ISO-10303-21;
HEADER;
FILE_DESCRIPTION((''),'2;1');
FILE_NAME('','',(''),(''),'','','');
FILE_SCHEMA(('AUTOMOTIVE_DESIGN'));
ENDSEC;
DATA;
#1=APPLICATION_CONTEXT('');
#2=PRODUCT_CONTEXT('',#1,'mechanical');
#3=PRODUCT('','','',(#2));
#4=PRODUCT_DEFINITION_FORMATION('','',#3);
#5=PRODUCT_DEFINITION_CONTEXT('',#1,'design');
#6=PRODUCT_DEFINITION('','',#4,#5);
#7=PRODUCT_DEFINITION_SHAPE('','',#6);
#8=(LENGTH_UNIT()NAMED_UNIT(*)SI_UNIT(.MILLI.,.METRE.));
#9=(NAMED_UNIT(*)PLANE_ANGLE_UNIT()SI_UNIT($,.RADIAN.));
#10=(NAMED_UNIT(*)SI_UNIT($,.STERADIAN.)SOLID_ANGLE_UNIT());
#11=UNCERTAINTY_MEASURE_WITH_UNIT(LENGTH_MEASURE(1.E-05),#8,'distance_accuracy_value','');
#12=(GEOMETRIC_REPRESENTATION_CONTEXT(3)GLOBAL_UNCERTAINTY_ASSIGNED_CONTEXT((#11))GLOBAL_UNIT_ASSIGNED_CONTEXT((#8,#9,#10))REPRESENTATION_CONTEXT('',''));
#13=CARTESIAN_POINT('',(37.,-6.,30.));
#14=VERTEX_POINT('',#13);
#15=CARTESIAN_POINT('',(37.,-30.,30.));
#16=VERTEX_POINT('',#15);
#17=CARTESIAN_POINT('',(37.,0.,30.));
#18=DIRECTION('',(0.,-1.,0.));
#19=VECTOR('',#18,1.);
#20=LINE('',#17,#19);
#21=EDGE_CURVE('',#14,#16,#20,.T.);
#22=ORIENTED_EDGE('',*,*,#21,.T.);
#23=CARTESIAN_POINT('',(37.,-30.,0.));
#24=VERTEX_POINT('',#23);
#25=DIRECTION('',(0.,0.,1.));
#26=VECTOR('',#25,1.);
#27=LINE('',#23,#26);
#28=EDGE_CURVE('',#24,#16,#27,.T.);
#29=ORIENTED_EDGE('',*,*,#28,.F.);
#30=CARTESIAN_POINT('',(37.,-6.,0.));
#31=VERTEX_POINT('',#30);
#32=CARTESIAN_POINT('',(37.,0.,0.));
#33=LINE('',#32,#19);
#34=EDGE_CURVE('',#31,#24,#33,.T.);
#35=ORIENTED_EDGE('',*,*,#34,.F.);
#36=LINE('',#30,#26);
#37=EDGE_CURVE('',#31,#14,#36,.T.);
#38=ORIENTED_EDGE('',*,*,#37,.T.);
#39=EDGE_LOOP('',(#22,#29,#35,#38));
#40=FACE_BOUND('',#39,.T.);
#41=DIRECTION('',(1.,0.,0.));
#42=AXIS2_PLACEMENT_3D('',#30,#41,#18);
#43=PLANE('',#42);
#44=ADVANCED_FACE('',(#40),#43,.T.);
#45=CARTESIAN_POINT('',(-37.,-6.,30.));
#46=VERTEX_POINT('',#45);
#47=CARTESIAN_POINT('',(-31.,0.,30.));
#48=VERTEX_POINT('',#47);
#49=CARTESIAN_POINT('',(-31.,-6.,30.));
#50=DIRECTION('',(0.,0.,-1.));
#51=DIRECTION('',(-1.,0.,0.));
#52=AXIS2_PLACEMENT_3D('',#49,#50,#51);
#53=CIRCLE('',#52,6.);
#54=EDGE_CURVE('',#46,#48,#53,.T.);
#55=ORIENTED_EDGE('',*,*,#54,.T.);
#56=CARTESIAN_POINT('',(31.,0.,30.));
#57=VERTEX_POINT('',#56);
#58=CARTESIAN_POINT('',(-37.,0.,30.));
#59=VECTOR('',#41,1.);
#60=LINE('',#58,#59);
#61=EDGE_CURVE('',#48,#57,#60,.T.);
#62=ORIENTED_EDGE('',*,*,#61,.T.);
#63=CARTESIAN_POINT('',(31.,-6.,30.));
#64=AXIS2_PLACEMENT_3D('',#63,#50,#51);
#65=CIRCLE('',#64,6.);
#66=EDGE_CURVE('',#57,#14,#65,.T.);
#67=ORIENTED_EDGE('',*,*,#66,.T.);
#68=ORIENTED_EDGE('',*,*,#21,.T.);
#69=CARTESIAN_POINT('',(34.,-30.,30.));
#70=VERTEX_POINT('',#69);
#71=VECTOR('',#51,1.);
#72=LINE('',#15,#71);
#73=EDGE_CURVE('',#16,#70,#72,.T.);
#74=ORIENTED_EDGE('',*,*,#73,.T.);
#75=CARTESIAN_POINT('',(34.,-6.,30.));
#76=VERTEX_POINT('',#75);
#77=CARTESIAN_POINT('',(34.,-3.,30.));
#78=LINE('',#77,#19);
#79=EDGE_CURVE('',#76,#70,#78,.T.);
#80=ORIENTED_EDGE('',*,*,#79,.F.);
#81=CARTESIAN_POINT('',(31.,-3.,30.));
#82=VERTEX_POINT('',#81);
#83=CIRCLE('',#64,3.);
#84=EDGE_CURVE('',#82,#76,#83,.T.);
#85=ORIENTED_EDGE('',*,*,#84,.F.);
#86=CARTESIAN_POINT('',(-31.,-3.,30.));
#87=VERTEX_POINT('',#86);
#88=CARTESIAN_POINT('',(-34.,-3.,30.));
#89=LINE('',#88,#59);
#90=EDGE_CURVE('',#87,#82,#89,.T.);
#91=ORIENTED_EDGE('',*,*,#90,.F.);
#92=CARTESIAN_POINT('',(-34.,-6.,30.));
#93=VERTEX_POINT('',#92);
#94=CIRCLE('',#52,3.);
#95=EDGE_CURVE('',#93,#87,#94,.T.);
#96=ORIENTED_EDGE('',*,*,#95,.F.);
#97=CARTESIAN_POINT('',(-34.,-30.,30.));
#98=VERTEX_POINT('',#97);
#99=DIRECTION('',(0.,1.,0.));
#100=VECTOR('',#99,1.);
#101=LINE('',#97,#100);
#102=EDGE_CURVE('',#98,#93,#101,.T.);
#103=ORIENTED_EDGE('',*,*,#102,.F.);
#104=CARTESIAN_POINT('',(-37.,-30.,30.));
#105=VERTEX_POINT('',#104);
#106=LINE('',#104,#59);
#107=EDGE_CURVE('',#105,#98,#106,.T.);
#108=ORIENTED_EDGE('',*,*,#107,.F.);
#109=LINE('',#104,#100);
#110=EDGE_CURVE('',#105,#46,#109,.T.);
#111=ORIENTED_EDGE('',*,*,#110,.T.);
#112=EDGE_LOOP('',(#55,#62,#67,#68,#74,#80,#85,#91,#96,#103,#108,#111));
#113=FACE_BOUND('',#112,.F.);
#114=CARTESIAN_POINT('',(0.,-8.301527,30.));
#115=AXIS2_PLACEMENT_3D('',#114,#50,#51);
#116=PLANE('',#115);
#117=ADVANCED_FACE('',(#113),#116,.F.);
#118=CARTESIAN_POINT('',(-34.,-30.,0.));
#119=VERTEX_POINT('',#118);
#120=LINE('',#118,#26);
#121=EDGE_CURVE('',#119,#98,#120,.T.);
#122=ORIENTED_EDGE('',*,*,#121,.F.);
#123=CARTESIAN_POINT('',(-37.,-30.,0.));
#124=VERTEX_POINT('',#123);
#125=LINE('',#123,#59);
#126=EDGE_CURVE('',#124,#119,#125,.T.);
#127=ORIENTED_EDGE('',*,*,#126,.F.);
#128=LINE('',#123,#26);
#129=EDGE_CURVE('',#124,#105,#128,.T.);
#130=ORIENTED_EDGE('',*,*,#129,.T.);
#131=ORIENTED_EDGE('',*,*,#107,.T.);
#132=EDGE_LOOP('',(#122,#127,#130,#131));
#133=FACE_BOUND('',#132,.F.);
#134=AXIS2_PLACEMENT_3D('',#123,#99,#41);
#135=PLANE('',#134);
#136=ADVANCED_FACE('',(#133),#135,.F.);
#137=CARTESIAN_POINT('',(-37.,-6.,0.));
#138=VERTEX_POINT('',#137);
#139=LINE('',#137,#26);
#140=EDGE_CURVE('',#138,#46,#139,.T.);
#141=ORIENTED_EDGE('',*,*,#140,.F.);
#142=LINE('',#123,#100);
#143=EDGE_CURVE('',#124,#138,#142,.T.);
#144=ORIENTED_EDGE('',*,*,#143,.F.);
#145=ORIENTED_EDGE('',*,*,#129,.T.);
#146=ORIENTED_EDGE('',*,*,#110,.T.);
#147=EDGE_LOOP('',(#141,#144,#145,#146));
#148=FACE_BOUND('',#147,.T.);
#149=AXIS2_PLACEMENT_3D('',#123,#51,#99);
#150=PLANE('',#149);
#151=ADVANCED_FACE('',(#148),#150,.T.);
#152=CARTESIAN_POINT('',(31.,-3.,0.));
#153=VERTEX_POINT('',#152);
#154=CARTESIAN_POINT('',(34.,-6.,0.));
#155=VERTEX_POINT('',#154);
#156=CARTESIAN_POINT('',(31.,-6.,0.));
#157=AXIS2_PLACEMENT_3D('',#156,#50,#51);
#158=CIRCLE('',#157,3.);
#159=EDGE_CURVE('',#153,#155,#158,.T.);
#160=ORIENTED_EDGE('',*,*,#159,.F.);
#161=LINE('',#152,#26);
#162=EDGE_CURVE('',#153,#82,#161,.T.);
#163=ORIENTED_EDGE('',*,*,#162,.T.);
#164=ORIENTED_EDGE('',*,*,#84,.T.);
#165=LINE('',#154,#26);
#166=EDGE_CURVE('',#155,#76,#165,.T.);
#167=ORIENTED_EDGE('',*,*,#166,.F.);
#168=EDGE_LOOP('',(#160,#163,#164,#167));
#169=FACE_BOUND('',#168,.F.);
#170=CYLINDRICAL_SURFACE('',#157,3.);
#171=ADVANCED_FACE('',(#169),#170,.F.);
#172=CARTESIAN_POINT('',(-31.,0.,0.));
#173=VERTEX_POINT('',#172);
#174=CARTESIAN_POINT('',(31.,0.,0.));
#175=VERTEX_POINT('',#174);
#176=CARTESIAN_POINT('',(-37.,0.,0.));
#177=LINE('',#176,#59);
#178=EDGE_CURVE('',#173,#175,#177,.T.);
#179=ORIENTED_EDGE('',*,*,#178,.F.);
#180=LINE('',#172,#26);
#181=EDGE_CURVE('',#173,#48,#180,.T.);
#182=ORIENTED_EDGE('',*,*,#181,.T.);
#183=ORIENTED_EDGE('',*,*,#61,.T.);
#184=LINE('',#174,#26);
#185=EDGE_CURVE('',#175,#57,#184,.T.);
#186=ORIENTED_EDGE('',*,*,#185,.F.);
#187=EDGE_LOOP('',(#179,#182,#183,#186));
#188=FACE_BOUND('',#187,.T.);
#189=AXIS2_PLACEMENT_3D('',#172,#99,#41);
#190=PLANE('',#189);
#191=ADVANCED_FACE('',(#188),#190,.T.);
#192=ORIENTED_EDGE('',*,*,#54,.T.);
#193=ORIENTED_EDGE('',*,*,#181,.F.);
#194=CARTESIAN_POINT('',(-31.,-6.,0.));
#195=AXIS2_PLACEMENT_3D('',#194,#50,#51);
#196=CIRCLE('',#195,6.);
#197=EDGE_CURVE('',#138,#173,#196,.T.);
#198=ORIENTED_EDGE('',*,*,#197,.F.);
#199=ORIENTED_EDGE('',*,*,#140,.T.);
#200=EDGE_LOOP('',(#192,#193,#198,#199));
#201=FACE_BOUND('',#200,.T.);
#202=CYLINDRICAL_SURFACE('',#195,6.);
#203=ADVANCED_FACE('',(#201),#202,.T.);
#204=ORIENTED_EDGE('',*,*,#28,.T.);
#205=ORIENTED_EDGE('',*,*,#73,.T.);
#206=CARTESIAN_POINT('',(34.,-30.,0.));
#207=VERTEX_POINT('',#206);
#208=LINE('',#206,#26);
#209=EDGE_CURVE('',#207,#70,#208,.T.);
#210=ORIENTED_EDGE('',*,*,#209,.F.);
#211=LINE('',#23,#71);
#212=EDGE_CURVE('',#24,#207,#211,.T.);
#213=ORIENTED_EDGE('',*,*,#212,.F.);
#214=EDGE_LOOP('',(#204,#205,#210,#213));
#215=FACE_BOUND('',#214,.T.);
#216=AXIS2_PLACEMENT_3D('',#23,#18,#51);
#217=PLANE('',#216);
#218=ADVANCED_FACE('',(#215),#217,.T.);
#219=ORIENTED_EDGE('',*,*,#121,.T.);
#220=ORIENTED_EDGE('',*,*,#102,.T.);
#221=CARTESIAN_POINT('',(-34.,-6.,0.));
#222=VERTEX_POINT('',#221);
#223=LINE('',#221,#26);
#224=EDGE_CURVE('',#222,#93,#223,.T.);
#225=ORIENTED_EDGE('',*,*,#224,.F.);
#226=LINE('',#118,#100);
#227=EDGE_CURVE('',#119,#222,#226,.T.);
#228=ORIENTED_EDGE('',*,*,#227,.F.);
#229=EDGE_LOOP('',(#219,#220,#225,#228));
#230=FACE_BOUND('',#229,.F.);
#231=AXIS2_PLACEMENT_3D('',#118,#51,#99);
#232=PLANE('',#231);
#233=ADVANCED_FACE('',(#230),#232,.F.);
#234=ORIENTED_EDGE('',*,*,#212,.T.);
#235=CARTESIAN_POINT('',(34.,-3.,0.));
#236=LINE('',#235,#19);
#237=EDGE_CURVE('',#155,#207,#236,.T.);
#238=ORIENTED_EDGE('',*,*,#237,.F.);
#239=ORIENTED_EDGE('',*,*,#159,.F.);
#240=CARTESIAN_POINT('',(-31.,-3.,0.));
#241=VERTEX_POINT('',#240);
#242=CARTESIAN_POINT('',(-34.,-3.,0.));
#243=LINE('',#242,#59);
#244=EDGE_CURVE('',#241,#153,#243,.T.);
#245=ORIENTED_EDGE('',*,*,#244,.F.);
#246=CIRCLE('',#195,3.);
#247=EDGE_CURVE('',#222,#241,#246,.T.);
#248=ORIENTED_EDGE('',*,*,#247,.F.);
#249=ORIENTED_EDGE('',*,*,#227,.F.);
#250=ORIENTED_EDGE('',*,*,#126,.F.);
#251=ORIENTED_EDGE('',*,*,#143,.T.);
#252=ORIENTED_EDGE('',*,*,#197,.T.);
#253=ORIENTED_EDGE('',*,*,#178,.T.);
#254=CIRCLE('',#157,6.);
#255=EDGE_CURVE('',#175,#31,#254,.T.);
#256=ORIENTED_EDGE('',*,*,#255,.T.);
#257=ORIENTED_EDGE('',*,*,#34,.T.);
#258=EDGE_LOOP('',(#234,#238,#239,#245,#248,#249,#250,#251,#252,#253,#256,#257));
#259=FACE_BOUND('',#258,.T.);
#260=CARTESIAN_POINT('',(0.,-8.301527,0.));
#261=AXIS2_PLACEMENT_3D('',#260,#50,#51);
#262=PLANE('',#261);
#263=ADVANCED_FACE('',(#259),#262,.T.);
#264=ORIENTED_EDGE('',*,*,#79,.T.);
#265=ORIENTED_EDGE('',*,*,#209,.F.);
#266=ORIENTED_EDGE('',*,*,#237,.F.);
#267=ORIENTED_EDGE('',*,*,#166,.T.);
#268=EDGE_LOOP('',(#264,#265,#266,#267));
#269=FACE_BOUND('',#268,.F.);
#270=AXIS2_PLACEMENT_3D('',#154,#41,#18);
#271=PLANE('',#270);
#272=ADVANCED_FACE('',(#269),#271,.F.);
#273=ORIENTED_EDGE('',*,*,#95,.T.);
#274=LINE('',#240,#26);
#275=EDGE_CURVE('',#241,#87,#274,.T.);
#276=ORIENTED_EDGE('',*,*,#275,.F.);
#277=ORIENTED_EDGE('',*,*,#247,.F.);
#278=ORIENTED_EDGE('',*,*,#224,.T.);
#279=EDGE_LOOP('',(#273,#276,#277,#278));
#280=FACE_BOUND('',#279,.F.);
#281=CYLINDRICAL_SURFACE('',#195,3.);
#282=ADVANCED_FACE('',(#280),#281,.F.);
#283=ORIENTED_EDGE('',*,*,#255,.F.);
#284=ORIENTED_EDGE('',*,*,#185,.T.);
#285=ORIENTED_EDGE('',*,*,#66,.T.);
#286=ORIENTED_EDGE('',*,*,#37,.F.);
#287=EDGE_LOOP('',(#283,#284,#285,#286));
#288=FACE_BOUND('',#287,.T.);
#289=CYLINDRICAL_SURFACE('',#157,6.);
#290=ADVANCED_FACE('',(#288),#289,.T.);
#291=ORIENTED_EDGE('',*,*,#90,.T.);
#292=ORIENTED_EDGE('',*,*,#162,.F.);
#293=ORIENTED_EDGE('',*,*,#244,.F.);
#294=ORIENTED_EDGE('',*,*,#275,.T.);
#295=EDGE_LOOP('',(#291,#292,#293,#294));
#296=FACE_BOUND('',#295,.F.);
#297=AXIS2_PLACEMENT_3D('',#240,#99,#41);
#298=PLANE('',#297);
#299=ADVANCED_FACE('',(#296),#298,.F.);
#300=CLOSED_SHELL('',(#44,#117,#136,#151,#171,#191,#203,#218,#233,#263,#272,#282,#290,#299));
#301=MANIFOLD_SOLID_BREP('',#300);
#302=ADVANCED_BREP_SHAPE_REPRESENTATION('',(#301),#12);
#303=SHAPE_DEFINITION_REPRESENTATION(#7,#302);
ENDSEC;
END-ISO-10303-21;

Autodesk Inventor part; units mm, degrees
ref_plane "YZ Plane" through (0, 0, 0) normal (1, 0, 0) x (0, 1, 0)
ref_plane "XZ Plane" through (0, 0, 0) normal (0, 1, 0) x (-1, 0, 0)
ref_plane "XY Plane" through (0, 0, 0) normal (0, 0, 1) x (1, 0, 0)
sketch "Sketch1" plane through (0, 0, 0) normal (0, 0, 1) x (1, 0, 0)
  line L0 (-37, -30) -> (-37, 0)
  line L1 (-37, 0) -> (37, 0)
  line L2 (37, 0) -> (37, -30)
  point P0 (0, 0)
  point P1 (0, 0)
  dimension "d0" = 30
  dimension "d1" = 74
contour flange "Contour Flange1" sketch "Sketch1" thickness 3 bend radius 3 width 30 along (0, 0, 1) mid plane no both sides no wall seen from (-37, -15, 0) lies toward (1, 0, 0) curves L0 L1 L2
bend "Bend1"
corner "Corner1"
equation "\"d4\" = Thickness"
equation "\"d5\" = BendReliefWidth"
equation "\"d6\" = BendReliefDepth"
equation "\"d7\" = MinimumRemnant"
equation "\"d8\" = TransitionRadius"
equation "\"d10\" = BendRadius"
equation "\"d12\" = CornerReliefSize"
equation "\"d13\" = GapSize"
equation "\"d14\" = JacobiRadiusSize"
equation "\"BendRadius\" = Thickness"
equation "\"BendReliefWidth\" = Thickness"
equation "\"BendReliefDepth\" = 0.5 * Thickness"
equation "\"CornerReliefSize\" = 4 * Thickness"
equation "\"MinimumRemnant\" = 2 * Thickness"
equation "\"TransitionRadius\" = BendRadius"
equation "\"JacobiRadiusSize\" = BendRadius"
equation "\"GapSize\" = Thickness"
equation "\"Thickness\" = 3"
properties part number "ДМС 205 Усилитель кассеты"
